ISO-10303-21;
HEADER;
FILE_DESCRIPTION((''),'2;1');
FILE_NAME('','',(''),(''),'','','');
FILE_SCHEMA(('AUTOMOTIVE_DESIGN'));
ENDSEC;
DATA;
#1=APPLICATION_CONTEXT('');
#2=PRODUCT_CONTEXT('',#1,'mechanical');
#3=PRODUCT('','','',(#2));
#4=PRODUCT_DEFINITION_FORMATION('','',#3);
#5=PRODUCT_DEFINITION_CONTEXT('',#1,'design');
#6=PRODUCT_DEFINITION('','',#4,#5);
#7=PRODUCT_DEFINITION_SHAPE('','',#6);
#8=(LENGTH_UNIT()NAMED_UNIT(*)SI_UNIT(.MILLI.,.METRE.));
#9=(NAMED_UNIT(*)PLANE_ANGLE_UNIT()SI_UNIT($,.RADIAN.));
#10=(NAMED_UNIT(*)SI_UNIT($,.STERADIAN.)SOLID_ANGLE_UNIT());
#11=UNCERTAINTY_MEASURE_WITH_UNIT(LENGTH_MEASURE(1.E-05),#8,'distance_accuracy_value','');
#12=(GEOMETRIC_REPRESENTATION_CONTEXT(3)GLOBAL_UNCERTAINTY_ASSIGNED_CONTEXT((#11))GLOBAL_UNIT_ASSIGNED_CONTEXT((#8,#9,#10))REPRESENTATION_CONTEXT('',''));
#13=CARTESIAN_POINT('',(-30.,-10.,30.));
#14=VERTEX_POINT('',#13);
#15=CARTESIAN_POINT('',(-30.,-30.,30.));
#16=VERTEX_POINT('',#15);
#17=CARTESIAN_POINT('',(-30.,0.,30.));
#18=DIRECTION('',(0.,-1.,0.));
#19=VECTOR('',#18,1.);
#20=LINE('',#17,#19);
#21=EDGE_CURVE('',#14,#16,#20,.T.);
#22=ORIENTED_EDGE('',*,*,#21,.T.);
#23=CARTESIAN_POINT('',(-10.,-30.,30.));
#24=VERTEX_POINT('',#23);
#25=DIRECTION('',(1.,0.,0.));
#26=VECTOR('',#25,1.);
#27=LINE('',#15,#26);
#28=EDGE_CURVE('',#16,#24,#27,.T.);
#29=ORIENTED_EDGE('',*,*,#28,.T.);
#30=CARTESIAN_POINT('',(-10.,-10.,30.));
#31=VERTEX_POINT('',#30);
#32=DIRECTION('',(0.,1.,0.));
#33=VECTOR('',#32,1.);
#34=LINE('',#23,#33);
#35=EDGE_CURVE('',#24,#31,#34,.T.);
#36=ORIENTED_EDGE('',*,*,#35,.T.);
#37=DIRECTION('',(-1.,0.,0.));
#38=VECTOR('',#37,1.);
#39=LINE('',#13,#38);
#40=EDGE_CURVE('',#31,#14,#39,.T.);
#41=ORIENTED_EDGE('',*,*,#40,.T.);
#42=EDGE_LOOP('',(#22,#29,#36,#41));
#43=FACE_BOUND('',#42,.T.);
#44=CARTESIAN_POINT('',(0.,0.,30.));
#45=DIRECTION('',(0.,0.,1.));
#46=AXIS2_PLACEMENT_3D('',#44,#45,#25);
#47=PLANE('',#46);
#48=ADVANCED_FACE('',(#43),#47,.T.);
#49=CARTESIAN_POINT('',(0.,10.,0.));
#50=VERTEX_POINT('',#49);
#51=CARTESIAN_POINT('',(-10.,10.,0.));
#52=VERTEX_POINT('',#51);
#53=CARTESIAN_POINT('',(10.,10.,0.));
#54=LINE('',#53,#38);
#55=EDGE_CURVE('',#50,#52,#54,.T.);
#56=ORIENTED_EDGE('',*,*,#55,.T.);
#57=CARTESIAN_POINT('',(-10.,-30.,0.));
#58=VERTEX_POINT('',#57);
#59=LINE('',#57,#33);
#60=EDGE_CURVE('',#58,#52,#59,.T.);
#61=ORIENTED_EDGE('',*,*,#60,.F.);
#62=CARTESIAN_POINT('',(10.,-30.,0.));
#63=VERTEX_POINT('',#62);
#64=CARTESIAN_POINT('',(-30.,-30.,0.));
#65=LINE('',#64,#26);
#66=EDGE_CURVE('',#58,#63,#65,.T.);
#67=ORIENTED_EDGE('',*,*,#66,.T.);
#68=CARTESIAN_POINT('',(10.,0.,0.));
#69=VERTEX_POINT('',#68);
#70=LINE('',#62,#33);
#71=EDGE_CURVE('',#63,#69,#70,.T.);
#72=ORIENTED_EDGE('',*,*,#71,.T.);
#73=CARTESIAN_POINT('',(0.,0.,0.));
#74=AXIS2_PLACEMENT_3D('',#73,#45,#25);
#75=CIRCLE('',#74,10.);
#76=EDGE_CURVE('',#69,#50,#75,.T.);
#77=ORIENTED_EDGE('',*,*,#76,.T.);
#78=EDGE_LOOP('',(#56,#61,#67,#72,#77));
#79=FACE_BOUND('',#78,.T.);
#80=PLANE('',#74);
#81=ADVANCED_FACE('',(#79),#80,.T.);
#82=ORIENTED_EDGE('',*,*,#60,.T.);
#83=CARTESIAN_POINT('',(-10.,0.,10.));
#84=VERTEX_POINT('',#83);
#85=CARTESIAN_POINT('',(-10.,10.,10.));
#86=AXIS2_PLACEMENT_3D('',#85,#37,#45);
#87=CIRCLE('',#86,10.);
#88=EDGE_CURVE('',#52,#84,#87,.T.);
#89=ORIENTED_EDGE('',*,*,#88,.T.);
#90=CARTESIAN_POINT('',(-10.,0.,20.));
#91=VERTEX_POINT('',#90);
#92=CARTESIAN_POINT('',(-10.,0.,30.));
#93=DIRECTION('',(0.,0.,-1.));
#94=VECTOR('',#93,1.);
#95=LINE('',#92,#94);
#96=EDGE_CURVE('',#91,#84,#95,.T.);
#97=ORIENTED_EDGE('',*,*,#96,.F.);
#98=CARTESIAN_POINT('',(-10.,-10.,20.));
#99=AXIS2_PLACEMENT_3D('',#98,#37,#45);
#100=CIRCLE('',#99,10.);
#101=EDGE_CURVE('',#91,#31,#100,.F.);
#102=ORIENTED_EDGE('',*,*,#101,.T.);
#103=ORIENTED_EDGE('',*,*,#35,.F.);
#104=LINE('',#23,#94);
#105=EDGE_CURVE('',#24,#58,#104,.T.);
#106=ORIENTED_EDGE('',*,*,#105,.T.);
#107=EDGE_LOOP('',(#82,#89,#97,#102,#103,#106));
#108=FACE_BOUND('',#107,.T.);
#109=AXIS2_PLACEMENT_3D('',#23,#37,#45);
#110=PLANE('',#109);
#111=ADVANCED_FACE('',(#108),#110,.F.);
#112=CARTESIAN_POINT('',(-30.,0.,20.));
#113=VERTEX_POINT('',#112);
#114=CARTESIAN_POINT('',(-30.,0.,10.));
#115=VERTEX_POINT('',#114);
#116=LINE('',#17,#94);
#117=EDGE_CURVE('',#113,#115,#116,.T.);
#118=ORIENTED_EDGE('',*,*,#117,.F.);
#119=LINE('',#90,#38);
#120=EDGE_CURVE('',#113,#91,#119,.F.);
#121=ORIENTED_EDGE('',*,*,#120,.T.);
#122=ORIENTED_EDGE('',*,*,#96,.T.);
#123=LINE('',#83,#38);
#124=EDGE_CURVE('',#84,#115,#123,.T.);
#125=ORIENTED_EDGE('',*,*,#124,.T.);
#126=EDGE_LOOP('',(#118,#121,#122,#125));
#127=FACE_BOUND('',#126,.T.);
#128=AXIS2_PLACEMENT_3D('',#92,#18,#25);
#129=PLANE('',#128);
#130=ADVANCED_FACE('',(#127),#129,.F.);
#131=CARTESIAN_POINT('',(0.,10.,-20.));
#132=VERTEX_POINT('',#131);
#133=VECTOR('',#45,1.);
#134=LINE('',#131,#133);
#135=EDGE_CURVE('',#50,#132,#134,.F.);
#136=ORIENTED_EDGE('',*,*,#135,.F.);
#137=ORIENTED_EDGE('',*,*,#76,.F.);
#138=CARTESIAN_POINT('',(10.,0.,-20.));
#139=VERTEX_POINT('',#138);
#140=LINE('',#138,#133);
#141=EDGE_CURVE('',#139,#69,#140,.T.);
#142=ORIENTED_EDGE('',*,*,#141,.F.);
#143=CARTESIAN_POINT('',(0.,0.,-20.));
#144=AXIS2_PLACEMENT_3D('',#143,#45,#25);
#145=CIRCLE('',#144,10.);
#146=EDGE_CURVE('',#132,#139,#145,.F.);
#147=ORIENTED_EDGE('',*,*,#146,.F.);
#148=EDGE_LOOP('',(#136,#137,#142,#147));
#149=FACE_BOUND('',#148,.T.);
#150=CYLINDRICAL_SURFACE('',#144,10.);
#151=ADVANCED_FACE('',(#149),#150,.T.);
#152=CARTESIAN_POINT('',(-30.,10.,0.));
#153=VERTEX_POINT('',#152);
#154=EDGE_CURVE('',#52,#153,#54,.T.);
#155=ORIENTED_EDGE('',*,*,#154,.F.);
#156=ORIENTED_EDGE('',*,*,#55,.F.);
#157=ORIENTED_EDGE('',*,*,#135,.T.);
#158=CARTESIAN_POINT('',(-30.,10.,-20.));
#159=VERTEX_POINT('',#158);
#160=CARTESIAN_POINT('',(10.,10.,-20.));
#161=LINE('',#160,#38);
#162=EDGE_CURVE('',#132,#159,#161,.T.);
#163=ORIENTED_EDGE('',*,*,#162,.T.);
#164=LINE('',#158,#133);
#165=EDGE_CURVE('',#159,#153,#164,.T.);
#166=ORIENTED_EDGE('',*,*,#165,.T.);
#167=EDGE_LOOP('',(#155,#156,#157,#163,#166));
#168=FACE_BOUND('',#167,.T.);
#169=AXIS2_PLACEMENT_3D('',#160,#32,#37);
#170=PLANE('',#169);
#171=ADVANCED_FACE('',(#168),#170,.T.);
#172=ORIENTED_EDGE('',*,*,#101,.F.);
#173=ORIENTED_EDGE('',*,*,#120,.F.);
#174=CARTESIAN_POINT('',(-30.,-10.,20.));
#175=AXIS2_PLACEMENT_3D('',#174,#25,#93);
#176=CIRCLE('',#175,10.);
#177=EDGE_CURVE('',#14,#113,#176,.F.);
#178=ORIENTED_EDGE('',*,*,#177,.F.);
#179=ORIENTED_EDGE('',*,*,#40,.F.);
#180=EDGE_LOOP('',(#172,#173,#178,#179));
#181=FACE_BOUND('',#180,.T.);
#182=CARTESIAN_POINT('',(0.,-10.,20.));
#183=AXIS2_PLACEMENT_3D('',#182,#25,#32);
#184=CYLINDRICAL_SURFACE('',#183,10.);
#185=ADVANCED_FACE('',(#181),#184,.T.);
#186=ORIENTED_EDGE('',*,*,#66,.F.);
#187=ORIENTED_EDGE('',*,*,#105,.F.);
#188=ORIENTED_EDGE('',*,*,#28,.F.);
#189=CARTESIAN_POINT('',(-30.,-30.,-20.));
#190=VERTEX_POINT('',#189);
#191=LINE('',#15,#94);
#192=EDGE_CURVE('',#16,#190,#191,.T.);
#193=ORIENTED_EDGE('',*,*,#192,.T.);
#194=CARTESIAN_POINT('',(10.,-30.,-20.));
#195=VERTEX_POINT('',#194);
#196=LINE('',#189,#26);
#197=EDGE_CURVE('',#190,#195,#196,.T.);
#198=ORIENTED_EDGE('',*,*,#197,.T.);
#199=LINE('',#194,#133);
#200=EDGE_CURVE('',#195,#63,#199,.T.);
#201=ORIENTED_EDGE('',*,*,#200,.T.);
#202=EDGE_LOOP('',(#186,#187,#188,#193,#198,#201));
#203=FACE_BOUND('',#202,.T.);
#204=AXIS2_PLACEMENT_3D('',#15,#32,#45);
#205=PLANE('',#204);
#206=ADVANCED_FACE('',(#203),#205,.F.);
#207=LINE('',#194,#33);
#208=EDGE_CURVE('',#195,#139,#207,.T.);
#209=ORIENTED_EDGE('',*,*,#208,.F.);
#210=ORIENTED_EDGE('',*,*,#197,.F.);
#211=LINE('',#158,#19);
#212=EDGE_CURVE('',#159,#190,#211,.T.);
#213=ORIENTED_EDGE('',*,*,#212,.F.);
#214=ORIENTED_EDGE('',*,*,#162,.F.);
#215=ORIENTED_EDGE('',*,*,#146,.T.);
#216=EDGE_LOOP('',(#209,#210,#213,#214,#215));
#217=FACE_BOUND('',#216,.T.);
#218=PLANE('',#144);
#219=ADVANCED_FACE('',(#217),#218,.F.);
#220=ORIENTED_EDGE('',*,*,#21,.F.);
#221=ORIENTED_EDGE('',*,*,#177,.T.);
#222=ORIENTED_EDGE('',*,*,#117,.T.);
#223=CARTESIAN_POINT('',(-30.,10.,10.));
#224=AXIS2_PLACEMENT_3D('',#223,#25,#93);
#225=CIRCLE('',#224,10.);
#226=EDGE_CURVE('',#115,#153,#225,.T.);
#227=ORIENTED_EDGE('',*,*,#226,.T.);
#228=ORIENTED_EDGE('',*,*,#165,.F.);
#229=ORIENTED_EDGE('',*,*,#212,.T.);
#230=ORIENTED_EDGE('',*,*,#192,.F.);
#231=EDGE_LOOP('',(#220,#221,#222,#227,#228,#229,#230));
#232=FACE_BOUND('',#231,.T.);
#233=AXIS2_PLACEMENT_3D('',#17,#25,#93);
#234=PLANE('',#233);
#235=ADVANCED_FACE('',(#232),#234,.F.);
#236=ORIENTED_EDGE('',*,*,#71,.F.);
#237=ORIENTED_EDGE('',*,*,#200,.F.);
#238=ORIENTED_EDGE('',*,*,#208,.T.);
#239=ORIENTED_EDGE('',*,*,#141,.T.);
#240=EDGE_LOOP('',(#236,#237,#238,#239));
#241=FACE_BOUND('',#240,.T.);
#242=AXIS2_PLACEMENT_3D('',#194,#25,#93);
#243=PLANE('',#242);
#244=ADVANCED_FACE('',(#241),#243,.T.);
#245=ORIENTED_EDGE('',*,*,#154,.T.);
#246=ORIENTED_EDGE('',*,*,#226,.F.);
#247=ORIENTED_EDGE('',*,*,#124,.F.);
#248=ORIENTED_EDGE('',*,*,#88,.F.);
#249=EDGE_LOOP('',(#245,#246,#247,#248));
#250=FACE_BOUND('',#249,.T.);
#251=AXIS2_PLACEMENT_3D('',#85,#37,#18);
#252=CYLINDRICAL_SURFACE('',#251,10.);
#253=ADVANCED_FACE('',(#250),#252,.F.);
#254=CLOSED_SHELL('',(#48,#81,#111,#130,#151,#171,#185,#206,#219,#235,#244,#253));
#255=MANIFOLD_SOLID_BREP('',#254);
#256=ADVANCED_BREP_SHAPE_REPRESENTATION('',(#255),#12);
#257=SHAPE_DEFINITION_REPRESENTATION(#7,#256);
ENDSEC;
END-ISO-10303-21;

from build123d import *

# Parameters (mm, degrees)
SKETCH1_W           = 20
SKETCH1_H           = 30
BOSS_EXTRUDE1_DEPTH = 30
SKETCH2_W           = 40
SKETCH2_H           = 40
BOSS_EXTRUDE2_DEPTH = 20
FILLET1_R           = 10


with BuildPart() as part:
    # Sketch1 → Boss-Extrude1 (new body)
    with BuildSketch(Plane.XY):
        with Locations((-20, -15)):
            Rectangle(SKETCH1_W, SKETCH1_H)
    extrude(amount=BOSS_EXTRUDE1_DEPTH)

    # Sketch2 → Boss-Extrude2 (add)
    with BuildSketch(Plane.XY):
        with Locations((-10, -10)):
            Rectangle(SKETCH2_W, SKETCH2_H)
    extrude(amount=-BOSS_EXTRUDE2_DEPTH)

    # Fillet1
    fillet1_edges = [part.edges().sort_by_distance(p)[0] for p in [
        (-20, 0, 0),
        (10, 10, -10),
        (-20, 0, 30),
    ]]
    fillet(fillet1_edges, radius=FILLET1_R - 0.0001)  # a hair under: the kernel refuses the full size


solid = part.part
